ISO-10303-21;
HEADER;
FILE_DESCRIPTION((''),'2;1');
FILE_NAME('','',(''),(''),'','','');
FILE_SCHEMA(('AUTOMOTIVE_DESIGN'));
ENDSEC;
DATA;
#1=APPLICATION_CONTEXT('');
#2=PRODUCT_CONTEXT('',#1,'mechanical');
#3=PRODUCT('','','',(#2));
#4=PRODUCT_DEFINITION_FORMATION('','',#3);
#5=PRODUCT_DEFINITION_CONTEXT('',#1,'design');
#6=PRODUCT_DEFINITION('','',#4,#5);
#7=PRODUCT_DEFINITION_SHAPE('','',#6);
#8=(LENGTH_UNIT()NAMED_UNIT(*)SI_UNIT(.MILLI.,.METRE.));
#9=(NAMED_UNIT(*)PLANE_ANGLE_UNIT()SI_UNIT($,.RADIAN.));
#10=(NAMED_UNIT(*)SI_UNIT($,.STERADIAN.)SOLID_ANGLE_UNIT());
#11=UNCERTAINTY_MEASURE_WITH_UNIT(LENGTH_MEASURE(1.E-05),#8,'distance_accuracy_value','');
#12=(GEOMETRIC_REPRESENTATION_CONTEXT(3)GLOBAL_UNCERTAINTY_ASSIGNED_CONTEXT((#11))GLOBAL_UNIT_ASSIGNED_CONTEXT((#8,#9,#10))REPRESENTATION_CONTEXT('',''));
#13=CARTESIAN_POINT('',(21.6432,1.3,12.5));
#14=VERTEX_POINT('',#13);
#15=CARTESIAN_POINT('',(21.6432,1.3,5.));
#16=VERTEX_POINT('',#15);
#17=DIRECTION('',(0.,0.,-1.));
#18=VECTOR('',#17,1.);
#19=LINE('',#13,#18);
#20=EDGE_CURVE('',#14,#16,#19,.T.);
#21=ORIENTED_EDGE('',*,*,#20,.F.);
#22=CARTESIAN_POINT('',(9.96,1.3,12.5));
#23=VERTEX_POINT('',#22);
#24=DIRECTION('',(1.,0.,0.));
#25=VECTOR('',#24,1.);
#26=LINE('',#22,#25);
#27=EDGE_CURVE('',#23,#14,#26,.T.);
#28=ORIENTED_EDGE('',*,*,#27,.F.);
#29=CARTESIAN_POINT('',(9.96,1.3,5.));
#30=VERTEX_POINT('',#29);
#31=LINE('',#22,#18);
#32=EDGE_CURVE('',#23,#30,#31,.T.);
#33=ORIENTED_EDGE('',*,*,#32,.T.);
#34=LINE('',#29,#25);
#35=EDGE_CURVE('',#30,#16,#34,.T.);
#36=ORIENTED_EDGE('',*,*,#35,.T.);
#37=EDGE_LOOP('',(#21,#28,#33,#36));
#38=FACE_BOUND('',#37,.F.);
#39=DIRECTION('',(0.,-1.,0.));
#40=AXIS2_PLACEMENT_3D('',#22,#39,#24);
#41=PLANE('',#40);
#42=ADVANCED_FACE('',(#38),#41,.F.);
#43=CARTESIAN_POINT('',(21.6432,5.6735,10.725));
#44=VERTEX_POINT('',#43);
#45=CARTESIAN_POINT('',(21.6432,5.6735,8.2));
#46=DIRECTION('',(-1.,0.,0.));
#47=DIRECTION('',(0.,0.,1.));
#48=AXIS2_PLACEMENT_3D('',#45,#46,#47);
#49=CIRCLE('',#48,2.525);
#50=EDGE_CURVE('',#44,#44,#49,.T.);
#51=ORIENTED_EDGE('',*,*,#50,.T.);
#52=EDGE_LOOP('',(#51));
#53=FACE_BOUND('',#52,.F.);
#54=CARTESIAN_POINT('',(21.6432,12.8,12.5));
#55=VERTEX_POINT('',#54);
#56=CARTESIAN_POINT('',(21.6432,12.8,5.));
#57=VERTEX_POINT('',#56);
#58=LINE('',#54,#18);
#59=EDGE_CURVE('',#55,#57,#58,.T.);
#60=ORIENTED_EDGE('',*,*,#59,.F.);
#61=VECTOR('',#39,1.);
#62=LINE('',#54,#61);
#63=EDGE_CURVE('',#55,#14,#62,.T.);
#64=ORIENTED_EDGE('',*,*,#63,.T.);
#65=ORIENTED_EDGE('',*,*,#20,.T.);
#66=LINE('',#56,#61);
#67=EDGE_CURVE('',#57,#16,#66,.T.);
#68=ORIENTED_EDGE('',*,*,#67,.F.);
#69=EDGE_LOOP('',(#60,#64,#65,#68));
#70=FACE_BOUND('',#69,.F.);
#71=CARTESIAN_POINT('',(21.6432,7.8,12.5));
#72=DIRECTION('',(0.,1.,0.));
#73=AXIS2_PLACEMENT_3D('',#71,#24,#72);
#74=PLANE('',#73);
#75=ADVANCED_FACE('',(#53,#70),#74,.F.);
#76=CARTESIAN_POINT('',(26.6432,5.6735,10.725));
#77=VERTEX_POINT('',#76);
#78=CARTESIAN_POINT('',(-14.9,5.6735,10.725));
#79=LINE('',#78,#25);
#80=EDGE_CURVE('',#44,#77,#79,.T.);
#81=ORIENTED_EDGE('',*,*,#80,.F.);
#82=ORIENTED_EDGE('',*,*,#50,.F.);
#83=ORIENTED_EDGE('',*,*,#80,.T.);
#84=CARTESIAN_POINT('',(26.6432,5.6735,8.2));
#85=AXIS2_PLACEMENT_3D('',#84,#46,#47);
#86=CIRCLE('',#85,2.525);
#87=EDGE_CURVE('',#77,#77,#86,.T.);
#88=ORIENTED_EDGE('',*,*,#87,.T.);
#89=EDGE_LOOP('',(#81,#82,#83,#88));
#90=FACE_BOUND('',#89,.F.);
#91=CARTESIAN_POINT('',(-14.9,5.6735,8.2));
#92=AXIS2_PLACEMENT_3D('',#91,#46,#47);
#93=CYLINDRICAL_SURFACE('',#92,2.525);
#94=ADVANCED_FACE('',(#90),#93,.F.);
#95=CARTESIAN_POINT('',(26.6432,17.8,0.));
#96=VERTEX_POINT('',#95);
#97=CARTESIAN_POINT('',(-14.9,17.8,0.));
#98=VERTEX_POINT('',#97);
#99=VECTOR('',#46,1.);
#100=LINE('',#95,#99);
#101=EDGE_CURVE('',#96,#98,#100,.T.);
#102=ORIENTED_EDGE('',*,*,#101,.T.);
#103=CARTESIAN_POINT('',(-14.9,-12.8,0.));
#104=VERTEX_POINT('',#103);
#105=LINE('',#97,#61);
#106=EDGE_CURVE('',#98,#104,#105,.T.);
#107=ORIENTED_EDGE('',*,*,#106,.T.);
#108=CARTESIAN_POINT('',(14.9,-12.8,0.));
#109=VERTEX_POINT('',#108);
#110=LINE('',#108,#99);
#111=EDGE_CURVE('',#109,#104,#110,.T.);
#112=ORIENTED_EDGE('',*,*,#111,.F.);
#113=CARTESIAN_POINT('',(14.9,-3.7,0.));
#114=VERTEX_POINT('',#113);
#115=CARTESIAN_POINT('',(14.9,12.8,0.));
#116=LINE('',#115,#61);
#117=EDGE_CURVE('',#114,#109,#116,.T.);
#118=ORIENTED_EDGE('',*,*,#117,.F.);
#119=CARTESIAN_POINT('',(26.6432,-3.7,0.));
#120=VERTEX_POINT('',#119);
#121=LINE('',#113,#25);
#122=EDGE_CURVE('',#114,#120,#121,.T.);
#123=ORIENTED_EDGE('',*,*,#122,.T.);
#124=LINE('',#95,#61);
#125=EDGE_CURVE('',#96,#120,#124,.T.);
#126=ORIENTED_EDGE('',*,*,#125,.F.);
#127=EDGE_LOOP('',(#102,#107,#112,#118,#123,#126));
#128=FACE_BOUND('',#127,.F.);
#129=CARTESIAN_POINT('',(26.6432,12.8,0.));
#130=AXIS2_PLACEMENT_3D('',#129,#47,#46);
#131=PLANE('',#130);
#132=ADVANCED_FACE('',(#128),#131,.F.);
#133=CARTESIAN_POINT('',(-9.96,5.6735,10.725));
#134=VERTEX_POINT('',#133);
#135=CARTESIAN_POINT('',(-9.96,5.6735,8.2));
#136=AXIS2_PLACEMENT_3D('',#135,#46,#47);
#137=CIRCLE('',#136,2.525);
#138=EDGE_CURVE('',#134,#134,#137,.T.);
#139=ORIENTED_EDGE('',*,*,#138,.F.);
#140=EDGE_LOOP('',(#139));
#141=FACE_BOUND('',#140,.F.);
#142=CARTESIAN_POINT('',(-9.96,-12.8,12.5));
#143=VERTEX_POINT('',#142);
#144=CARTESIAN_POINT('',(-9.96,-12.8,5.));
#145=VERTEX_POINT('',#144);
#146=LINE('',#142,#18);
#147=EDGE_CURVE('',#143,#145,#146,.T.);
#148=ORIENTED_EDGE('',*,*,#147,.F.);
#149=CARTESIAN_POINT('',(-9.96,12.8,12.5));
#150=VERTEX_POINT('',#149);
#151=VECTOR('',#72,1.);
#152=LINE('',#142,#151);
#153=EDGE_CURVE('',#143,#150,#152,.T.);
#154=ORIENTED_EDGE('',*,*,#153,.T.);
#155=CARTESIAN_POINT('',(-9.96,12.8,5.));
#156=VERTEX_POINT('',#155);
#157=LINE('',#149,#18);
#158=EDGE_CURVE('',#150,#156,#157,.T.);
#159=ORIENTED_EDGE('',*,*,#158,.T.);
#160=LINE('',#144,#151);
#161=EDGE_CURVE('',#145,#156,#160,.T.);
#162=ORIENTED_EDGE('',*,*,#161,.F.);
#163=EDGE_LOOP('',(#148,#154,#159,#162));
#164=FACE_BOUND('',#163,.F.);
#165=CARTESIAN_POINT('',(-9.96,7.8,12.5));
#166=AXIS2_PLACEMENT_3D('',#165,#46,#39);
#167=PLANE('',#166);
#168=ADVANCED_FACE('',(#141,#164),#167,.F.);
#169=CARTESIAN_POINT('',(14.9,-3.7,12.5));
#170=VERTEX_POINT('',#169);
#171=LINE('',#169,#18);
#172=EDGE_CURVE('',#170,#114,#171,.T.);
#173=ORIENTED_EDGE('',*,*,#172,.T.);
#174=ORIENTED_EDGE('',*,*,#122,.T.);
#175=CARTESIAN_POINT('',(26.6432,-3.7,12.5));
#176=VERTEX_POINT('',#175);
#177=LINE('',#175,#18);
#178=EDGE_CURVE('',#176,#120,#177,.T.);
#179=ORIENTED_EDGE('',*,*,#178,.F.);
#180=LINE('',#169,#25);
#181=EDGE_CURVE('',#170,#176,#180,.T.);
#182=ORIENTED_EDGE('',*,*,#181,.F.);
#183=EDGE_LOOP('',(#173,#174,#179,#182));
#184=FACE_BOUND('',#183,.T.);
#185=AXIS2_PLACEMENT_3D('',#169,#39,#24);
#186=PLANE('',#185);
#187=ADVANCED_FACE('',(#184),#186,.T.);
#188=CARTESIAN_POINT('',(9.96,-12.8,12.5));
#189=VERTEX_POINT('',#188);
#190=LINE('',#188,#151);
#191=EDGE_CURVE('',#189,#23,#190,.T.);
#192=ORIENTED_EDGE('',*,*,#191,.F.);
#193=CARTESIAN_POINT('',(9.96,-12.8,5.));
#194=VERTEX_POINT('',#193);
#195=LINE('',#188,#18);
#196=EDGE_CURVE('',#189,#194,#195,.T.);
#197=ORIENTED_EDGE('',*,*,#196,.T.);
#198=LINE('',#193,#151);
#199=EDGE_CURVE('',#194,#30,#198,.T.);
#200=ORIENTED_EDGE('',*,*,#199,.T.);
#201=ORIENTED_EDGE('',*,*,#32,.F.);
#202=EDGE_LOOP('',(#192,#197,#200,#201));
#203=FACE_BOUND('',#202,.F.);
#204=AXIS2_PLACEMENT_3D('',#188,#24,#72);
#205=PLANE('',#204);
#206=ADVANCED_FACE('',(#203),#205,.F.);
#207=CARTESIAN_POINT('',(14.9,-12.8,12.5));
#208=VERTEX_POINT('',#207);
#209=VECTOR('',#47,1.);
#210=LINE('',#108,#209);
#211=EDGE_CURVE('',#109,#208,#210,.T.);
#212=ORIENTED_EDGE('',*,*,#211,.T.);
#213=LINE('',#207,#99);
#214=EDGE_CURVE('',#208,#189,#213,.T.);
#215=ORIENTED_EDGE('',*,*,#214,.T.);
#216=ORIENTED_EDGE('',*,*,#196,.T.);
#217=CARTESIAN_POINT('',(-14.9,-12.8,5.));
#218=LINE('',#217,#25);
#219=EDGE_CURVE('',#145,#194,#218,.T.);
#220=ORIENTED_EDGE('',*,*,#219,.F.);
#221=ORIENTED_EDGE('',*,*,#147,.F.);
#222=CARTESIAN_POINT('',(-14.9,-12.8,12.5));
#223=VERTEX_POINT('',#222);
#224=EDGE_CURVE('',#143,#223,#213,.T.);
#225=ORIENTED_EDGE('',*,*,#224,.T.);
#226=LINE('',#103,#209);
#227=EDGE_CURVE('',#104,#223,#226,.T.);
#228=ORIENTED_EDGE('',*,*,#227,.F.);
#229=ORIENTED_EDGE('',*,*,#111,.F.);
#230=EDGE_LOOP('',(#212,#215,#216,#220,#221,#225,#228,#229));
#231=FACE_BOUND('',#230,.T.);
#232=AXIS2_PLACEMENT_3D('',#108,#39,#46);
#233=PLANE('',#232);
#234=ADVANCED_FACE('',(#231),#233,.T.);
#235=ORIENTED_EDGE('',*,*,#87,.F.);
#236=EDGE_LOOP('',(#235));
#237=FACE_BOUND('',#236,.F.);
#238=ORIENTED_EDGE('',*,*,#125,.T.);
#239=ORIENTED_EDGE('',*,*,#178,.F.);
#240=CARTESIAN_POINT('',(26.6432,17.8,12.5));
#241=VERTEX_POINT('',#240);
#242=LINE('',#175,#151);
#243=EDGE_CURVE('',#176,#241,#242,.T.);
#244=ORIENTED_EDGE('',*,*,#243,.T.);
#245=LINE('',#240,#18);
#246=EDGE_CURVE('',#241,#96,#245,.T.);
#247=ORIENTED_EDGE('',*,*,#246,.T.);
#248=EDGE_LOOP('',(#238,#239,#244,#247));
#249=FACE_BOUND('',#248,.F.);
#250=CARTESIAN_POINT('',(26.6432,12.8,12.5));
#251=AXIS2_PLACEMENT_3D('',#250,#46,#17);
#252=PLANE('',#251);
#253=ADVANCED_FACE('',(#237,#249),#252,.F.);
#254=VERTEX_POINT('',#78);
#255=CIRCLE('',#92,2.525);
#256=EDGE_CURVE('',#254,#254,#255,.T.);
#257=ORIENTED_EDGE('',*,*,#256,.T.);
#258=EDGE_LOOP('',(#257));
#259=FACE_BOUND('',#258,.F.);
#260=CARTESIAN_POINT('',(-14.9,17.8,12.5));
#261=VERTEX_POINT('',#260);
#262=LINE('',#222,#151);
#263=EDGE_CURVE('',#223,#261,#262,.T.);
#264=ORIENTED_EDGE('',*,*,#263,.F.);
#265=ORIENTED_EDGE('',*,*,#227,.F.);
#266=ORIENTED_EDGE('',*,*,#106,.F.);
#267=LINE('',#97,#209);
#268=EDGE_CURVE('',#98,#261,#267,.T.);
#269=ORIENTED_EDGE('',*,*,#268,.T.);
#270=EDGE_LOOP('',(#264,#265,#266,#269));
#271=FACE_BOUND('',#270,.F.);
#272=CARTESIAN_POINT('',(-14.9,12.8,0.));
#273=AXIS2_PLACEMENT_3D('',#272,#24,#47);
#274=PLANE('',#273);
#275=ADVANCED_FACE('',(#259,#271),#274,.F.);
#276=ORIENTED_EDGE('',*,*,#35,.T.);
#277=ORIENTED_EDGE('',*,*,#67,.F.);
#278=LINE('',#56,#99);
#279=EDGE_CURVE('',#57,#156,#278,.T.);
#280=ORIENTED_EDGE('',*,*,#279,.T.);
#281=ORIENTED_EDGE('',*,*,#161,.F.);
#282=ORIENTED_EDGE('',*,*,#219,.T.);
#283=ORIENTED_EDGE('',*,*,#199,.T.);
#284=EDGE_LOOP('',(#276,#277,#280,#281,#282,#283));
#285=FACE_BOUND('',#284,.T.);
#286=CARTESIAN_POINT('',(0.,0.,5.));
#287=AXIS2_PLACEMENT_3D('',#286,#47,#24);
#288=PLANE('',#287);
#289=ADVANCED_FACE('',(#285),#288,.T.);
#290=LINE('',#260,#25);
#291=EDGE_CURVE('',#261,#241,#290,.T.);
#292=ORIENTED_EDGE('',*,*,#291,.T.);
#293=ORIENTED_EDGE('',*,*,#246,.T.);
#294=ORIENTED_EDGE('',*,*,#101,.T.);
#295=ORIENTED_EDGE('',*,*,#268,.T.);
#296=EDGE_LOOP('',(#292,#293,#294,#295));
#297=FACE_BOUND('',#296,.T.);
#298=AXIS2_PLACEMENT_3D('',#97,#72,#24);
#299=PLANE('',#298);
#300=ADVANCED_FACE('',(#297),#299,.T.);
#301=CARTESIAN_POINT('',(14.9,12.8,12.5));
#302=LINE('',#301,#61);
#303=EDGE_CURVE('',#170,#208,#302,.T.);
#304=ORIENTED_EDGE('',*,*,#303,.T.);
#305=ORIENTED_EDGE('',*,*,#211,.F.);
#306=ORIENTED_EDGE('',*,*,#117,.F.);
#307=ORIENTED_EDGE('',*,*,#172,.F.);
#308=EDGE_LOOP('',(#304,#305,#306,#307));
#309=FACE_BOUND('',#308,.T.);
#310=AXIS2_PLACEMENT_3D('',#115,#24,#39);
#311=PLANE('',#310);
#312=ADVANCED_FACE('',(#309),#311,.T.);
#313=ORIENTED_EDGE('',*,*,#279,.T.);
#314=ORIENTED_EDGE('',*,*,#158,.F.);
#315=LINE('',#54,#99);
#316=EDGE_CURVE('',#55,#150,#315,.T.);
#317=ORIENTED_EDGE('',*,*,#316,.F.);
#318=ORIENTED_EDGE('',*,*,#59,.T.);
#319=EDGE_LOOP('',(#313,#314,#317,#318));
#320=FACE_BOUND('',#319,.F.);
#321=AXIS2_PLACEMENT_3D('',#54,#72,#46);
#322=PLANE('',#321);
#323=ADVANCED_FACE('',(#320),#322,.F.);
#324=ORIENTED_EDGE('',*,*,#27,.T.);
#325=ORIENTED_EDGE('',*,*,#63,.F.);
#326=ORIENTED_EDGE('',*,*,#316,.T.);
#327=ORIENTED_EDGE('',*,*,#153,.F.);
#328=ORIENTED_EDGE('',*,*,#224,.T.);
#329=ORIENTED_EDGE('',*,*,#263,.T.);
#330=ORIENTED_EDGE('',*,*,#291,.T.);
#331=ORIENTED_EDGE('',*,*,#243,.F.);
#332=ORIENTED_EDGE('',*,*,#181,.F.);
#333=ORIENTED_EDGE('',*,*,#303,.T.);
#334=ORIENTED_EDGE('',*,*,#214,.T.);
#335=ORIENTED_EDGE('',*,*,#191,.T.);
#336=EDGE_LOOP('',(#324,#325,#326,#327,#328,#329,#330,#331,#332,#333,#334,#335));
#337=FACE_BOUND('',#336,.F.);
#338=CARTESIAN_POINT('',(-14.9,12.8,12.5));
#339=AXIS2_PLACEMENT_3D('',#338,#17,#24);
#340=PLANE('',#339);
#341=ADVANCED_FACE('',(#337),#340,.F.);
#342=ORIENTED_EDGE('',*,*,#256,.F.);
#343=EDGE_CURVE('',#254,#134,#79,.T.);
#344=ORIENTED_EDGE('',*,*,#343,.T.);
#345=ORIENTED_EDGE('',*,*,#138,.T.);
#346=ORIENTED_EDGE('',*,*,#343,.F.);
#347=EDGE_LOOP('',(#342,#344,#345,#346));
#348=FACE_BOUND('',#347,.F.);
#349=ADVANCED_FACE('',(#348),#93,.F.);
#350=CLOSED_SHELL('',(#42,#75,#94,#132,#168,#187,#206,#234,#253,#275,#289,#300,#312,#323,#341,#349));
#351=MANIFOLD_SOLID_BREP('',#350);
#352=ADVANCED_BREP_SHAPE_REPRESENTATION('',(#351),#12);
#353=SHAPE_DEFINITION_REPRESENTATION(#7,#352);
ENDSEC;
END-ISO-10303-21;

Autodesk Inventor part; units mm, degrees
ref_plane "YZ Plane" through (0, 0, 0) normal (1, 0, 0) x (0, 1, 0)
ref_plane "XZ Plane" through (0, 0, 0) normal (0, 1, 0) x (-1, 0, 0)
ref_plane "XY Plane" through (0, 0, 0) normal (0, 0, 1) x (1, 0, 0)
sketch "Sketch1" plane through (0, 0, 0) normal (0, 0, 1) x (1, 0, 0)
  line L0 (4.1434, -12.66) -> (3.2904, -12.66)
  line L1 (-14.9, 12.8) -> (14.9, 12.8)
  line L2 (14.9, 12.8) -> (14.9, -12.8)
  line L3 (14.9, -12.8) -> (-14.9, -12.8)
  line L4 (-14.9, -12.8) -> (-14.9, 12.8)
  point P0 (0, 0)
  point P1 (0, 12.8)
  point P2 (-14.9, 0)
  dimension "d4" = 29.8
  dimension "d5" = 25.6
extrude "Extrusion1" add sketch "Sketch1" along normal blind 12.5
sketch "Sketch2" plane through (0, 0, 12.5) normal (0, 0, 1) x (1, 0, 0)
  line L0 (-14.9, -12.8) -> (14.9, -12.8) projected
  line L1 (-9.96, -12.8) -> (9.96, -12.8)
  line L2 (9.96, -12.8) -> (9.96, 7.8)
  line L3 (9.96, 7.8) -> (-9.96, 7.8)
  line L4 (-9.96, 7.8) -> (-9.96, -12.8)
  line L5 (14.9, 12.8) -> (-14.9, 12.8) projected
  point P0 (0, 0)
  point P1 (0, 7.8)
  dimension "d8" = 19.92
  dimension "d9" = 5
extrude "Extrusion2" cut sketch "Sketch2" against normal blind 7.5
sketch "Sketch3" plane through (0, 0, 12.5) normal (0, 0, 1) x (1, 0, 0)
  line L0 (-0.14, 0.6) -> (-0.84, 1.3) projected
  line L1 (14.9, -12.8) -> (14.9, 12.8) projected
  line L2 (14.9, -3.7) -> (26.6432, -3.7)
  line L3 (26.6432, -3.7) -> (26.6432, 12.8)
  line L4 (26.6432, 12.8) -> (14.9, 12.8)
  line L5 (14.9, 12.8) -> (14.9, -3.7)
  line L6 (14.9, 12.8) -> (-14.9, 12.8) projected
  line L7 (-7.482, 1.9485) -> (17.86, 10.1145) projected
  line L8 (-7.482, 1.9485) -> (19.1432, 1.9485)
  line L9 (9.96, 7.8) -> (9.96, -12.8) projected
  line L10 (9.96, 1.3) -> (21.6432, 1.3)
  line L11 (21.6432, 1.3) -> (21.6432, 7.8)
  line L12 (21.6432, 7.8) -> (9.96, 7.8)
  line L13 (9.96, 7.8) -> (9.96, 1.3)
  line L14 (-9.96, 7.8) -> (9.96, 7.8) projected
  point P0 (0, 0)
  point P1 (15.8016, 1.3)
  point P2 (21.6432, 4.55)
  dimension "d12" = 5
  dimension "d13" = 7.5
  dimension "d14" = 5
extrude "Extrusion3" add sketch "Sketch3" against normal blind 12.5 contours L1 L10 L11 L12 L4 L3 L2 | L1 L12 L11 L10
sketch "Sketch4" plane through (0, 0, 12.5) normal (0, 0, 1) x (1, 0, 0)
  line L0 (21.6432, 7.8) -> (9.96, 7.8) projected
  line L1 (9.96, 7.8) -> (9.96, 1.3) projected
  line L2 (9.96, 1.3) -> (21.6432, 1.3) projected
  line L3 (21.6432, 1.3) -> (21.6432, 7.8) projected
  point P0 (0, 0)
extrude "Extrusion4" cut sketch "Sketch4" against normal blind 7.5
thicken "Thicken1" operation add thickness 5 both sides no extend neighbours no toward (0, 1, 0) faces at (12.7954, 12.8, 4.1667)
sketch "Sketch5" plane through (0, 0, 12.5) normal (0, 0, 1) x (1, 0, 0)
  line L0 (-9.96, 7.8) -> (21.6432, 7.8) projected
  line L1 (-9.96, 7.8) -> (21.6432, 7.8)
  line L2 (21.6432, 7.8) -> (21.6432, 12.8)
  line L3 (21.6432, 12.8) -> (-9.96, 12.8)
  line L4 (-9.96, 12.8) -> (-9.96, 7.8)
  line L5 (21.6432, 7.8) -> (21.6432, 1.3) projected
  point P0 (0, 0)
  dimension "d21" = 5
extrude "Extrusion5" cut sketch "Sketch5" against normal blind 7.5
sketch "Sketch6" plane through (-14.9, -12.8, 0) normal (-1, 0, 0) x (0, 0, 1)
  circle A0 centre (8.2, 18.4735) radius 2.525
  line L0 (10, 14.7485) -> (6.4, 14.7485) projected
  line L1 (6.6, 15.3) -> (9.8, 15.3)
  point P0 (0, 12.8)
  point P1 (8.2, 14.7485)
  point P2 (8.2, 15.9485)
  dimension "d24" = 5.05
  dimension "d25" = 1.2
extrude "Extrusion6" cut sketch "Sketch6" against normal through all
properties part number "SS-5FL111-3T_Housing_01"
